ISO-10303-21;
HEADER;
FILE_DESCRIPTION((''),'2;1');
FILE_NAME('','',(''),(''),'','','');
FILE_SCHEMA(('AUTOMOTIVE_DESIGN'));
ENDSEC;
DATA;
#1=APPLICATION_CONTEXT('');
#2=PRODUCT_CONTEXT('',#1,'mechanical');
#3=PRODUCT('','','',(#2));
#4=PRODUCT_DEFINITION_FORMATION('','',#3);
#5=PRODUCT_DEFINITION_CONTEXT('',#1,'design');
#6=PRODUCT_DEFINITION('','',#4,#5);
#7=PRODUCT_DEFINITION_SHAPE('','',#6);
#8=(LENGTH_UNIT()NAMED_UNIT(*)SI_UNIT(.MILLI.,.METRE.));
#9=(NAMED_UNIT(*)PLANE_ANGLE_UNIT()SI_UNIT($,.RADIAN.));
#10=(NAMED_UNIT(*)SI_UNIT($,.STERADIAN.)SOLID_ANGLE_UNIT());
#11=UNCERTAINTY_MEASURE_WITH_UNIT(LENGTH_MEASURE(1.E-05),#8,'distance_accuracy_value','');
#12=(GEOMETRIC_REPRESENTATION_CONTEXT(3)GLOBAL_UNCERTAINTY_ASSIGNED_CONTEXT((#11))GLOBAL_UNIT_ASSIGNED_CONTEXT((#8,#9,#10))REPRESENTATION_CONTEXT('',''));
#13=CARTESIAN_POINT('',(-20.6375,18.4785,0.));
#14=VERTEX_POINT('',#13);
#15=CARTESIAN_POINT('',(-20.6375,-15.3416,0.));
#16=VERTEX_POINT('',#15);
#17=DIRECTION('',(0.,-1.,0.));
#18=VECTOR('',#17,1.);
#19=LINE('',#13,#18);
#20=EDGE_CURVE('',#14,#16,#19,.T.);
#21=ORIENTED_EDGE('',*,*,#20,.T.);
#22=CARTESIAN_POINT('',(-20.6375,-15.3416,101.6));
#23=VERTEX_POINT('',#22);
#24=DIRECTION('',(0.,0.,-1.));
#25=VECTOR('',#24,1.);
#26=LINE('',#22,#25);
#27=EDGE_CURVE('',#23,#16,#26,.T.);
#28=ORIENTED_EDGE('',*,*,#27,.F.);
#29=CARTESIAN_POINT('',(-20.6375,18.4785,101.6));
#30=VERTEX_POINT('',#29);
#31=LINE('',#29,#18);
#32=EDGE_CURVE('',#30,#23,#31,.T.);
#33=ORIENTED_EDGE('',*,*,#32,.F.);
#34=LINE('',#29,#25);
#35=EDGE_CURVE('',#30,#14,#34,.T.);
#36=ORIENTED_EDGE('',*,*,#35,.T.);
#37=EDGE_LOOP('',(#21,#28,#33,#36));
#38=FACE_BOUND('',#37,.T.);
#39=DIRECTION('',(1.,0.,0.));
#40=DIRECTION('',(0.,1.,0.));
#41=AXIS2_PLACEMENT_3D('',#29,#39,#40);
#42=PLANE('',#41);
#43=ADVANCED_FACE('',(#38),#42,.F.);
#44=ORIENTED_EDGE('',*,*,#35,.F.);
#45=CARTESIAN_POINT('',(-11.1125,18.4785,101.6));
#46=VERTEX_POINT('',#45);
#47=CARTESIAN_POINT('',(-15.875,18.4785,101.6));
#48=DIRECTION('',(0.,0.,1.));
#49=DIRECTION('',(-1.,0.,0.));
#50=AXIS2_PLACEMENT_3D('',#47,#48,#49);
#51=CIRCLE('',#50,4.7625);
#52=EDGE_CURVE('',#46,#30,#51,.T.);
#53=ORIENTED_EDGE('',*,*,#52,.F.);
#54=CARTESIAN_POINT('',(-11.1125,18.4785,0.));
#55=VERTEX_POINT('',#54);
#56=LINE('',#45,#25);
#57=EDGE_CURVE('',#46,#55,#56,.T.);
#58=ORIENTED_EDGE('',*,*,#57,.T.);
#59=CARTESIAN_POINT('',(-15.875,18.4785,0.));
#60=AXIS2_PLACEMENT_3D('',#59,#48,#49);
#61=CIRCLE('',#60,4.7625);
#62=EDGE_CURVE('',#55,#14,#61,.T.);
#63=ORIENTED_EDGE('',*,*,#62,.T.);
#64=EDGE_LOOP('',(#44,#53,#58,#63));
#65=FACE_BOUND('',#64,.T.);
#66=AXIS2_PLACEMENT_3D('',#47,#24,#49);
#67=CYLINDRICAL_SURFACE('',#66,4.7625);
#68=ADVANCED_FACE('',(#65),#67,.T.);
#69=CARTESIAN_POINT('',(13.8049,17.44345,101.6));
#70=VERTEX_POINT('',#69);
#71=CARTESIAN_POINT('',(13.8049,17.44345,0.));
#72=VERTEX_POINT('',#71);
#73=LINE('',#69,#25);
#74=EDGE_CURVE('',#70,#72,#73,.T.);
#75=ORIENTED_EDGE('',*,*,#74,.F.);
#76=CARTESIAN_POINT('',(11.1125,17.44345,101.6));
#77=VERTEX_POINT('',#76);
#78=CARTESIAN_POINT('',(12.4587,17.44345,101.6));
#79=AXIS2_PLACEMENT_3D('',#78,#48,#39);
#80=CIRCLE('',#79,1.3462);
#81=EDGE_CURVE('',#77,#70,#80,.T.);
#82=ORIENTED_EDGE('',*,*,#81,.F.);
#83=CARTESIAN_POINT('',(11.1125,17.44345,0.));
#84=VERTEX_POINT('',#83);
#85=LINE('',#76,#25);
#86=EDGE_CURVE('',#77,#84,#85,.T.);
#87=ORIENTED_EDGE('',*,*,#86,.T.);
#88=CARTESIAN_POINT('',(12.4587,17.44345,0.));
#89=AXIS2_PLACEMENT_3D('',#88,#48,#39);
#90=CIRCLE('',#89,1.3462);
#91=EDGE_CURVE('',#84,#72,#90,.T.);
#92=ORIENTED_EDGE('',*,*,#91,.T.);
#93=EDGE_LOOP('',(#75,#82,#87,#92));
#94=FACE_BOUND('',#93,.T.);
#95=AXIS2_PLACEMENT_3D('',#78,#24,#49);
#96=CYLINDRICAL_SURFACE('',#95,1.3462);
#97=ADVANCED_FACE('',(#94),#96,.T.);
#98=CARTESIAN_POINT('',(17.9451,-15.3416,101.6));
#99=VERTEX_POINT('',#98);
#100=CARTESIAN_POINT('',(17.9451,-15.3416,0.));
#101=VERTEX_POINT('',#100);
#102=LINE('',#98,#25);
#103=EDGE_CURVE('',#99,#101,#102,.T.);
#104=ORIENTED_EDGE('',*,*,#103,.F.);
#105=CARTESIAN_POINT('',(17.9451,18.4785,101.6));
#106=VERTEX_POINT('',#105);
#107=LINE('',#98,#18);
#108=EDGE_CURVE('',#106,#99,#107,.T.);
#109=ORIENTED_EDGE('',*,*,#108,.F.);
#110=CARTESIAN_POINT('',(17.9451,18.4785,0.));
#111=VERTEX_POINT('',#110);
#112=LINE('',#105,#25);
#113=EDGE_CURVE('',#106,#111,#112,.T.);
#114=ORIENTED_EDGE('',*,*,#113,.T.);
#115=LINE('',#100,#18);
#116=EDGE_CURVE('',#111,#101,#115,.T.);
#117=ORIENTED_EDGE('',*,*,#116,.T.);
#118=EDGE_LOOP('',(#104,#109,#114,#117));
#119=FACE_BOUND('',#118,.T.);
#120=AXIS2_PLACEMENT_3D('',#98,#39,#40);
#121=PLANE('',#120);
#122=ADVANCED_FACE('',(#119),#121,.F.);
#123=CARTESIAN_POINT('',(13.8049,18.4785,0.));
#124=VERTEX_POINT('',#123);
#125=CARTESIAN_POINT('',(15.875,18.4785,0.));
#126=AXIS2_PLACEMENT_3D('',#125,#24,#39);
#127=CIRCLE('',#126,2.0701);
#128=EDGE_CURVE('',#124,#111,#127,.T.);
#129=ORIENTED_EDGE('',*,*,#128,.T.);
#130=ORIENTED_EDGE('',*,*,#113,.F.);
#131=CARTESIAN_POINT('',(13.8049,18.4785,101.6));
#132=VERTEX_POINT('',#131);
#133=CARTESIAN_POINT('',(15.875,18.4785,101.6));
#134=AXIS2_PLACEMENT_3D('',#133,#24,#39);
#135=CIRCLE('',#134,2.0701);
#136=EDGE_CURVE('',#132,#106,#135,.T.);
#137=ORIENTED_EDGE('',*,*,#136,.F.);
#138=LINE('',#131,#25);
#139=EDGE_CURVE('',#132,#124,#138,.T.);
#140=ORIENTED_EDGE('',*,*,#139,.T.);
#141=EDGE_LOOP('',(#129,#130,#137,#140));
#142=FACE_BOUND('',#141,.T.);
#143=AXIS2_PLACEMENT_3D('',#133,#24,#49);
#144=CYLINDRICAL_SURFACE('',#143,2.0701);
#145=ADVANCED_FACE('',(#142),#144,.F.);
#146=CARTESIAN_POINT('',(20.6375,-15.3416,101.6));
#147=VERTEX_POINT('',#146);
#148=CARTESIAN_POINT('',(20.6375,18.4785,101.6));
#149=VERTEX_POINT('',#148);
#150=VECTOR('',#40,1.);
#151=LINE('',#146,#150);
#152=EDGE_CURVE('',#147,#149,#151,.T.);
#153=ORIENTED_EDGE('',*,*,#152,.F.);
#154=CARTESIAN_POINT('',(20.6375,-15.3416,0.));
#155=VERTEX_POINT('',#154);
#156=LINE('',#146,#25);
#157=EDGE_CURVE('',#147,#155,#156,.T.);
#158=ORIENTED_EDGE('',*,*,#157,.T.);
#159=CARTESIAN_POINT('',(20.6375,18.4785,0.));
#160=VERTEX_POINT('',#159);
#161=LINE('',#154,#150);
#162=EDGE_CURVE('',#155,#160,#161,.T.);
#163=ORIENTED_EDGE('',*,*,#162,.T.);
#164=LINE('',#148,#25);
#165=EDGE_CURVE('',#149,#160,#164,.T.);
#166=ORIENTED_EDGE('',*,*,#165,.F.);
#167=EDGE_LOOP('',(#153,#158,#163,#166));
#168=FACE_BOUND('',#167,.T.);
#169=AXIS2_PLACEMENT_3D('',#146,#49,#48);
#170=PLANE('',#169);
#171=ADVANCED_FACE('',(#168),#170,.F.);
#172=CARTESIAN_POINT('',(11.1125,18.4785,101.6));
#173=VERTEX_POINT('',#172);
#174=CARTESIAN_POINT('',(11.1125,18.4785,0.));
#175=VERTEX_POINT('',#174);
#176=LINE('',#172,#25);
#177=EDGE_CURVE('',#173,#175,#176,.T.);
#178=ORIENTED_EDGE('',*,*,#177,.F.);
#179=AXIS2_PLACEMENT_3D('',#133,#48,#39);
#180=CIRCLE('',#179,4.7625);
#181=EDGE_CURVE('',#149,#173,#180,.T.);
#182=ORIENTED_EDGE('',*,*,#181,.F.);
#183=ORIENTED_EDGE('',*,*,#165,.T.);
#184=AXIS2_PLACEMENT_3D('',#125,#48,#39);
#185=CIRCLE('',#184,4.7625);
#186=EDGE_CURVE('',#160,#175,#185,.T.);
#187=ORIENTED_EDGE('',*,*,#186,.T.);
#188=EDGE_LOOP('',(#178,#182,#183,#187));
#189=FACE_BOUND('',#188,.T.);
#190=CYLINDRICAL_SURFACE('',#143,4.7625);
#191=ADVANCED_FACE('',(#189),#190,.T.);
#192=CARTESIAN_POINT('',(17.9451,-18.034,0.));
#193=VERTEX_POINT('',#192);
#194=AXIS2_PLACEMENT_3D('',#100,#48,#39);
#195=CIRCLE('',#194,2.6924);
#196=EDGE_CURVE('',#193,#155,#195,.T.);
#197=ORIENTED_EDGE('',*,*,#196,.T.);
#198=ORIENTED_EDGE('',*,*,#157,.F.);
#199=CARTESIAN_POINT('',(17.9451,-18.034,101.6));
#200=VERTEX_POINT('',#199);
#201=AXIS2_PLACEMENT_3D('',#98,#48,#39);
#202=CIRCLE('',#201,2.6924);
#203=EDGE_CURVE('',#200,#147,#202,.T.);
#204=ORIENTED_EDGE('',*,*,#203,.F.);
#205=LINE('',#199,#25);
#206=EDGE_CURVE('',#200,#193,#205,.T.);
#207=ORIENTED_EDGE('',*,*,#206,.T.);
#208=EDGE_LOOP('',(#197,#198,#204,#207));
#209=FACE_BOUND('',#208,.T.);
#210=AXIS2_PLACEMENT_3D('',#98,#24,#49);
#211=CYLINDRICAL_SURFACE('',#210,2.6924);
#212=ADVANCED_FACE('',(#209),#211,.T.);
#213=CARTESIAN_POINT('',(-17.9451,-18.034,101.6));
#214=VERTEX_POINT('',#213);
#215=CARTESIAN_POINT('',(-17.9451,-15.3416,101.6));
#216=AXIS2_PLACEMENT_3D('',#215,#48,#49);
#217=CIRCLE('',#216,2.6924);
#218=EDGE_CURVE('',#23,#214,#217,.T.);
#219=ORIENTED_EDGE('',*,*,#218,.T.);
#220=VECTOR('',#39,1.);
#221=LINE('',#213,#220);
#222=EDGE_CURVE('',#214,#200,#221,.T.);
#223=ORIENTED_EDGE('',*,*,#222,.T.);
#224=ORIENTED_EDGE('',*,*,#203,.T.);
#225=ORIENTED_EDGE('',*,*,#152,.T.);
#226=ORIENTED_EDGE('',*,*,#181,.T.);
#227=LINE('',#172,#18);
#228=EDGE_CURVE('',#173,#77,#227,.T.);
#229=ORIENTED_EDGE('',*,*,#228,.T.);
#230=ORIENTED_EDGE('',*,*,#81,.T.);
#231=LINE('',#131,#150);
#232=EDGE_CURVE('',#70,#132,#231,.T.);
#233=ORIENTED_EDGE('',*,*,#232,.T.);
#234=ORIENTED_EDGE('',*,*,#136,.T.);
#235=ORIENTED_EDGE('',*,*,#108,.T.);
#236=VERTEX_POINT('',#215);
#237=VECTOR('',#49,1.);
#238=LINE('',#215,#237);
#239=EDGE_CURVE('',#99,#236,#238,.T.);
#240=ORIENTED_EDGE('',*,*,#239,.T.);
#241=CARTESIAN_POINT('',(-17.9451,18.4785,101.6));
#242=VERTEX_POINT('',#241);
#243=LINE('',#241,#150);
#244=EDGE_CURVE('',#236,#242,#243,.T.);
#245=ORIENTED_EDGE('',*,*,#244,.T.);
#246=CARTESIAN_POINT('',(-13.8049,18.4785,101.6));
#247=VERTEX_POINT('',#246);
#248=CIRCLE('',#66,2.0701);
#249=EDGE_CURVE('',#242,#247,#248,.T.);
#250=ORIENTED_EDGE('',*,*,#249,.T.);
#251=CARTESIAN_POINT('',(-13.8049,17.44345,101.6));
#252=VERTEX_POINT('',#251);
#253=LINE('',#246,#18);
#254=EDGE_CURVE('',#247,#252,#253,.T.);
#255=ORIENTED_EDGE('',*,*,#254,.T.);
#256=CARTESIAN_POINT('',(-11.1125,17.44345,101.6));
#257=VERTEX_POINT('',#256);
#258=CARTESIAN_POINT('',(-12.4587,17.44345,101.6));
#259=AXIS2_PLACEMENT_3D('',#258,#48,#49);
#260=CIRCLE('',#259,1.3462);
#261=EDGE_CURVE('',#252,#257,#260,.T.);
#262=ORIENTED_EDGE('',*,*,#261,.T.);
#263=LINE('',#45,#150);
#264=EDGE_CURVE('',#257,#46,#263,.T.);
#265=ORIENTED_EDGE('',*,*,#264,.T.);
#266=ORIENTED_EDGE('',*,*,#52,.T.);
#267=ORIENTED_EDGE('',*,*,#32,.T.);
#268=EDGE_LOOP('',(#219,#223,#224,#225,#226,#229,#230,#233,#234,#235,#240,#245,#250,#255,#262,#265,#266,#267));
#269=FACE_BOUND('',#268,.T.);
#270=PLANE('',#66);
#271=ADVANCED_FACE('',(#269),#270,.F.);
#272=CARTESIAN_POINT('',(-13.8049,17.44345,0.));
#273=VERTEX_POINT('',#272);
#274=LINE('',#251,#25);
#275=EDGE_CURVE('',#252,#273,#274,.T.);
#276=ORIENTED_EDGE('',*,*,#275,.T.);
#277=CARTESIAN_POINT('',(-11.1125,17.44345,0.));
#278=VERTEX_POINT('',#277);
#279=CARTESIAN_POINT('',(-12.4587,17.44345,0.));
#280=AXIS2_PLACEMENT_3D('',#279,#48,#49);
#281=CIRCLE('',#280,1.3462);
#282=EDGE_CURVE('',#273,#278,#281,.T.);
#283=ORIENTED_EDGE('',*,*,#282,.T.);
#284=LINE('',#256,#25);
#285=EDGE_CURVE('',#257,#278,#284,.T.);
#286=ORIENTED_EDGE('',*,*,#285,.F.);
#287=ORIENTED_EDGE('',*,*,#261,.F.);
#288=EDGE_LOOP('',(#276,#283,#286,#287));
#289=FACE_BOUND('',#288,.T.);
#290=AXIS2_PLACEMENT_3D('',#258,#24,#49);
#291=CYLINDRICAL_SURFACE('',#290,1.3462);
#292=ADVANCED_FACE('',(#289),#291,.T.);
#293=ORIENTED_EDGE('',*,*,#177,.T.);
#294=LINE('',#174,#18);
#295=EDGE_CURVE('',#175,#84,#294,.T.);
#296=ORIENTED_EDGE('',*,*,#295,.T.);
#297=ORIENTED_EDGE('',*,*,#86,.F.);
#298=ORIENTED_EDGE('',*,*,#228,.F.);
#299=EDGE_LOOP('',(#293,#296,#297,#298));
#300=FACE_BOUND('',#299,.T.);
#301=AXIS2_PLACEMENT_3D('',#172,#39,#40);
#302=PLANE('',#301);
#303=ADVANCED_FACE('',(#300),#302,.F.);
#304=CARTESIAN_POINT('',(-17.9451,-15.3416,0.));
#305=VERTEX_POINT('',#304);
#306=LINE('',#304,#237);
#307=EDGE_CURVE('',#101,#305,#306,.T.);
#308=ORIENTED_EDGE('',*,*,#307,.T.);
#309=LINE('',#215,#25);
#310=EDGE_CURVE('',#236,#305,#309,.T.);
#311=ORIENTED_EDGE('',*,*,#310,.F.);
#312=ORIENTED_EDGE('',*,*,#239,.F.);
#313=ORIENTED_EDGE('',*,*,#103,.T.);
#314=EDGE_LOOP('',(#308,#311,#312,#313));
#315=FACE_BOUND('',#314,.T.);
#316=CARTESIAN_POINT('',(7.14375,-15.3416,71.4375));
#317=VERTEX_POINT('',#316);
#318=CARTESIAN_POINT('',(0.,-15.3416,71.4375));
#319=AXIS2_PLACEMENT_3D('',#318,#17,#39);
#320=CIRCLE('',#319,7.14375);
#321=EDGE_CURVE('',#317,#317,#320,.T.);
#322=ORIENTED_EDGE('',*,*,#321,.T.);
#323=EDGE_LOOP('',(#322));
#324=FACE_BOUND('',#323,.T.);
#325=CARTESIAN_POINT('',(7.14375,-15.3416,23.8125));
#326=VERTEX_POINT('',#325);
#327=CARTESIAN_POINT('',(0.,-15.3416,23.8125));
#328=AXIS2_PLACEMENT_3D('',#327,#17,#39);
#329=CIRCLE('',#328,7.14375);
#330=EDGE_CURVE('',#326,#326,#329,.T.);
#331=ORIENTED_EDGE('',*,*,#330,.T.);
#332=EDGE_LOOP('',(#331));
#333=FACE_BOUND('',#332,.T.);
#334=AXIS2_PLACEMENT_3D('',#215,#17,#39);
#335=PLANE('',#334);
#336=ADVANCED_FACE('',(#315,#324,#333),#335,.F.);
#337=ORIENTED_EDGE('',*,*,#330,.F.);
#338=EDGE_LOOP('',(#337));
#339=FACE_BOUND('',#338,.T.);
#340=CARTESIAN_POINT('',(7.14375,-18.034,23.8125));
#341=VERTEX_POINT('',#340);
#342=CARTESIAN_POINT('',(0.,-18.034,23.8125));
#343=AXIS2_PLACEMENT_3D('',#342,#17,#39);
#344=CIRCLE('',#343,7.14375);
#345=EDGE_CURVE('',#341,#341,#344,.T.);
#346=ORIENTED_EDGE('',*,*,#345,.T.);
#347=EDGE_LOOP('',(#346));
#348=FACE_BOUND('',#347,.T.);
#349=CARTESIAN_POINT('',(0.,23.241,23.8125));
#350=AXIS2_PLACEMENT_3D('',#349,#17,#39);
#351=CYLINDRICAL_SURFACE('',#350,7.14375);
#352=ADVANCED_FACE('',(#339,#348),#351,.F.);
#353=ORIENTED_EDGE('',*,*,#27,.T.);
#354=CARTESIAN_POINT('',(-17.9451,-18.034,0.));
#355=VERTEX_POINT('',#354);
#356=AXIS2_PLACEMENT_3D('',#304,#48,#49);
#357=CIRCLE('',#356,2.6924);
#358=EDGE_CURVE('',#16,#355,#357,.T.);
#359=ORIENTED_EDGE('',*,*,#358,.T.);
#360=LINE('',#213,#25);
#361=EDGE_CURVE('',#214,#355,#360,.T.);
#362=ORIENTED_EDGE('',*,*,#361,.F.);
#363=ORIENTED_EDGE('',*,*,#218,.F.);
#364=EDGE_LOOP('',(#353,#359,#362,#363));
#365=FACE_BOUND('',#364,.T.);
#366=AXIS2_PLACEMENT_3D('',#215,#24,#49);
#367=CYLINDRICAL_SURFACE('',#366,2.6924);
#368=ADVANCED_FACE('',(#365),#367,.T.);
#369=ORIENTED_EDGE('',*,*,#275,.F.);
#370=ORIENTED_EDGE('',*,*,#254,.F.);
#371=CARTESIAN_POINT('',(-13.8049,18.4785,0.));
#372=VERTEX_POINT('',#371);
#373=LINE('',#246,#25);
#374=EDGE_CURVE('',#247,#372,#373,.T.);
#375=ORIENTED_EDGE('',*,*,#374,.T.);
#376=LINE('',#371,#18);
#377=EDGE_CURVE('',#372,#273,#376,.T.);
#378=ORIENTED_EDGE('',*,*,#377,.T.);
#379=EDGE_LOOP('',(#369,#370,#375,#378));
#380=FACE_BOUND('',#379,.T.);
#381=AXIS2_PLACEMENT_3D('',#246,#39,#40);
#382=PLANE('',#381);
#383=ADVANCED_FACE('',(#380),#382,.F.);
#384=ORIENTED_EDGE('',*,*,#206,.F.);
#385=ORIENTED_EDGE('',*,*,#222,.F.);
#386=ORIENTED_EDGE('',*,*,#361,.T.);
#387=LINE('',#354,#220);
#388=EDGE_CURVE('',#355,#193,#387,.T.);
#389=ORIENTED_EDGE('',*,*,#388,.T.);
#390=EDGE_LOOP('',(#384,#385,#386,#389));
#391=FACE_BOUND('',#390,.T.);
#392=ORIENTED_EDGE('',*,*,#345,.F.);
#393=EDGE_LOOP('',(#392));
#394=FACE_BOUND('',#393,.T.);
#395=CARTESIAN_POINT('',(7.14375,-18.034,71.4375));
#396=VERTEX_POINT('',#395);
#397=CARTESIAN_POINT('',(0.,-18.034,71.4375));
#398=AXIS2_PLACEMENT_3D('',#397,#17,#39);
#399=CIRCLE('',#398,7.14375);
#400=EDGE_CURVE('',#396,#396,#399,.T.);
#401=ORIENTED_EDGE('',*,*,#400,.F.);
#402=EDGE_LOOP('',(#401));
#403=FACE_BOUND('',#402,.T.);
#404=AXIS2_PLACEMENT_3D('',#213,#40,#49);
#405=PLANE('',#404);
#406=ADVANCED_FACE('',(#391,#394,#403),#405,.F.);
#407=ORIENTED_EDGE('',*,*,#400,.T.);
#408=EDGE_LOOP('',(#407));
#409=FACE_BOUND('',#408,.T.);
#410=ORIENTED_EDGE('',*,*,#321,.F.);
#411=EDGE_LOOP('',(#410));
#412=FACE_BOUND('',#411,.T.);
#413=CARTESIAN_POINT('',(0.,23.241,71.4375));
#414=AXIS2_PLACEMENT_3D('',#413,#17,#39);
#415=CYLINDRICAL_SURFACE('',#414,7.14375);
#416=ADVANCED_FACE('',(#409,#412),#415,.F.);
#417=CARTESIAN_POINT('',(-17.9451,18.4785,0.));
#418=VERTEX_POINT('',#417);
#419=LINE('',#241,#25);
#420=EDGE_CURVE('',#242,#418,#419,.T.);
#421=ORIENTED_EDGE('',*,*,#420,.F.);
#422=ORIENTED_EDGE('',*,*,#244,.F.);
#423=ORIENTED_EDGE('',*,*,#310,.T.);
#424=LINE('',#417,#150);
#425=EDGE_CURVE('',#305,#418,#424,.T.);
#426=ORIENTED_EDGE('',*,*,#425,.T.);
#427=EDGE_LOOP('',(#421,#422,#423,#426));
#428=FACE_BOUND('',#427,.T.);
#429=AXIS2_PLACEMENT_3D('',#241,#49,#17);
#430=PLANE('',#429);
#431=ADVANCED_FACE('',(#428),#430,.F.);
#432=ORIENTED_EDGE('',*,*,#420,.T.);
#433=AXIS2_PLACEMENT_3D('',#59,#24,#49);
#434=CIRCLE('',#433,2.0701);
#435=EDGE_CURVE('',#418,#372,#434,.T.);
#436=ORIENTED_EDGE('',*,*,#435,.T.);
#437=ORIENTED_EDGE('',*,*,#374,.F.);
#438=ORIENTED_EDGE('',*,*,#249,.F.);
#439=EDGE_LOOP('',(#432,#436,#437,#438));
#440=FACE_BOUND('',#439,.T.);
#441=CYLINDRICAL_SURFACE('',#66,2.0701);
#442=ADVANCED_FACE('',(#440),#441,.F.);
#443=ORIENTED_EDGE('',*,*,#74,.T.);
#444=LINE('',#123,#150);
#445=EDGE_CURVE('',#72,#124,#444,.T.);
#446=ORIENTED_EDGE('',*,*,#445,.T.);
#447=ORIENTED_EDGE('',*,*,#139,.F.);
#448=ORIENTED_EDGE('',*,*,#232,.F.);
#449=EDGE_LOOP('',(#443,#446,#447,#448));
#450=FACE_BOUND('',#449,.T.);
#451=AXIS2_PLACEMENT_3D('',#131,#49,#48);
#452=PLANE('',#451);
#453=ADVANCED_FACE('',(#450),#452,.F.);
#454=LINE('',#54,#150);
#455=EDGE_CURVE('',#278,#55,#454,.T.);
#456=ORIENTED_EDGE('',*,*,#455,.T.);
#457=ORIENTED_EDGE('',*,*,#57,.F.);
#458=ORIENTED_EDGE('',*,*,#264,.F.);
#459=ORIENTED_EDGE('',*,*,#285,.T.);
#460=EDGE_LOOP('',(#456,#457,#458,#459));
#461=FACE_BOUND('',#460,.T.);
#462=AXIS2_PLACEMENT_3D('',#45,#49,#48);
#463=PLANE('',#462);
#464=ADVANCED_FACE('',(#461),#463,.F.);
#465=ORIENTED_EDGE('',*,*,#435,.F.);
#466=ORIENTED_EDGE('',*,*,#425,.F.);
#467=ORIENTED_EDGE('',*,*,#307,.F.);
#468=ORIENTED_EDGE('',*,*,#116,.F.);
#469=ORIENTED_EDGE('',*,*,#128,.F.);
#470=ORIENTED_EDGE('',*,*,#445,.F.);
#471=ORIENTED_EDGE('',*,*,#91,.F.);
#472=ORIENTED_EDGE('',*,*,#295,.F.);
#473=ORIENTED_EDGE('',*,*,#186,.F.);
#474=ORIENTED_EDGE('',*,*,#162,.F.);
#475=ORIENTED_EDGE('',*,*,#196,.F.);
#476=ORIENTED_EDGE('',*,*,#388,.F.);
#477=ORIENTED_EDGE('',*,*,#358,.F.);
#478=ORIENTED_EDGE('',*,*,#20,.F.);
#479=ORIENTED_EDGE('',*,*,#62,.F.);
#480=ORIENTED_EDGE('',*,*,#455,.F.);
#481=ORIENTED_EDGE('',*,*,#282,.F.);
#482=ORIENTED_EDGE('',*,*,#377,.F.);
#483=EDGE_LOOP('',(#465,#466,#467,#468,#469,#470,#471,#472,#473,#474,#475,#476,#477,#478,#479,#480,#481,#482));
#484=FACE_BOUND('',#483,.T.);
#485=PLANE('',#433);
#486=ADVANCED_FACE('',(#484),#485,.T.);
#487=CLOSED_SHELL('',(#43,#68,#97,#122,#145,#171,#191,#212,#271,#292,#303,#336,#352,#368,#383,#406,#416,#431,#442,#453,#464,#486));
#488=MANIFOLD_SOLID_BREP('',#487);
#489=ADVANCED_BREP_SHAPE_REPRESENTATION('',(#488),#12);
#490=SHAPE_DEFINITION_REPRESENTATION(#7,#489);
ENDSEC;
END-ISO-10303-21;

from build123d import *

# Parameters (mm, degrees)
BASE_EXTRUDE_DEPTH = 101.6
HOLE1_START        = -18.034
HOLE1_OUTLINE_R    = 7.14375
HOLE1_DEPTH        = 2.6924
LPATTERN1_COUNT    = 2
LPATTERN1_PITCH    = 47.625


# Read off the part's stored shape, not the designer's step: Hole1
with BuildPart() as part:
    # Sketch1 → Base-Extrude (new body)
    with BuildSketch(Plane.XY):
        with BuildLine():
            Line((-20.6375, 18.4785), (-20.6375, -15.3416))
            ThreePointArc((-20.6375, -15.3416), (-19.848914298, -17.245414298), (-17.9451, -18.034))
            Line((-17.9451, -18.034), (17.9451, -18.034))
            ThreePointArc((17.9451, -18.034), (19.848914298, -17.245414298), (20.6375, -15.3416))
            Line((20.6375, -15.3416), (20.6375, 18.4785))
            ThreePointArc((20.6375, 18.4785), (15.875, 23.241), (11.1125, 18.4785))
            Line((11.1125, 18.4785), (11.1125, 17.44345))
            ThreePointArc((11.1125, 17.44345), (12.4587, 16.09725), (13.8049, 17.44345))
            Line((13.8049, 17.44345), (13.8049, 18.4785))
            ThreePointArc((13.8049, 18.4785), (15.875, 20.5486), (17.9451, 18.4785))
            Line((17.9451, 18.4785), (17.9451, -15.3416))
            Line((17.9451, -15.3416), (-17.9451, -15.3416))
            Line((-17.9451, -15.3416), (-17.9451, 18.4785))
            ThreePointArc((-17.9451, 18.4785), (-15.875, 20.5486), (-13.8049, 18.4785))
            Line((-13.8049, 18.4785), (-13.8049, 17.44345))
            ThreePointArc((-13.8049, 17.44345), (-12.4587, 16.09725), (-11.1125, 17.44345))
            Line((-11.1125, 17.44345), (-11.1125, 18.4785))
            ThreePointArc((-11.1125, 18.4785), (-15.875, 23.241), (-20.6375, 18.4785))
        make_face()
    extrude(amount=BASE_EXTRUDE_DEPTH)

    # Hole1 outline → Hole1 (cut)
    with BuildSketch(Plane(origin=(0, 0, 0), x_dir=(1, 0, 0), z_dir=(0, 1, 0)).offset(HOLE1_START)):
        with Locations((0, -23.8125)):
            Circle(HOLE1_OUTLINE_R)
    hole1 = extrude(amount=HOLE1_DEPTH, mode=Mode.SUBTRACT)

    # LPattern1: Hole1 ×2
    with Locations(*[(0, 0, i * LPATTERN1_PITCH) for i in range(1, LPATTERN1_COUNT)]):
        add(hole1, mode=Mode.SUBTRACT)


solid = part.part
